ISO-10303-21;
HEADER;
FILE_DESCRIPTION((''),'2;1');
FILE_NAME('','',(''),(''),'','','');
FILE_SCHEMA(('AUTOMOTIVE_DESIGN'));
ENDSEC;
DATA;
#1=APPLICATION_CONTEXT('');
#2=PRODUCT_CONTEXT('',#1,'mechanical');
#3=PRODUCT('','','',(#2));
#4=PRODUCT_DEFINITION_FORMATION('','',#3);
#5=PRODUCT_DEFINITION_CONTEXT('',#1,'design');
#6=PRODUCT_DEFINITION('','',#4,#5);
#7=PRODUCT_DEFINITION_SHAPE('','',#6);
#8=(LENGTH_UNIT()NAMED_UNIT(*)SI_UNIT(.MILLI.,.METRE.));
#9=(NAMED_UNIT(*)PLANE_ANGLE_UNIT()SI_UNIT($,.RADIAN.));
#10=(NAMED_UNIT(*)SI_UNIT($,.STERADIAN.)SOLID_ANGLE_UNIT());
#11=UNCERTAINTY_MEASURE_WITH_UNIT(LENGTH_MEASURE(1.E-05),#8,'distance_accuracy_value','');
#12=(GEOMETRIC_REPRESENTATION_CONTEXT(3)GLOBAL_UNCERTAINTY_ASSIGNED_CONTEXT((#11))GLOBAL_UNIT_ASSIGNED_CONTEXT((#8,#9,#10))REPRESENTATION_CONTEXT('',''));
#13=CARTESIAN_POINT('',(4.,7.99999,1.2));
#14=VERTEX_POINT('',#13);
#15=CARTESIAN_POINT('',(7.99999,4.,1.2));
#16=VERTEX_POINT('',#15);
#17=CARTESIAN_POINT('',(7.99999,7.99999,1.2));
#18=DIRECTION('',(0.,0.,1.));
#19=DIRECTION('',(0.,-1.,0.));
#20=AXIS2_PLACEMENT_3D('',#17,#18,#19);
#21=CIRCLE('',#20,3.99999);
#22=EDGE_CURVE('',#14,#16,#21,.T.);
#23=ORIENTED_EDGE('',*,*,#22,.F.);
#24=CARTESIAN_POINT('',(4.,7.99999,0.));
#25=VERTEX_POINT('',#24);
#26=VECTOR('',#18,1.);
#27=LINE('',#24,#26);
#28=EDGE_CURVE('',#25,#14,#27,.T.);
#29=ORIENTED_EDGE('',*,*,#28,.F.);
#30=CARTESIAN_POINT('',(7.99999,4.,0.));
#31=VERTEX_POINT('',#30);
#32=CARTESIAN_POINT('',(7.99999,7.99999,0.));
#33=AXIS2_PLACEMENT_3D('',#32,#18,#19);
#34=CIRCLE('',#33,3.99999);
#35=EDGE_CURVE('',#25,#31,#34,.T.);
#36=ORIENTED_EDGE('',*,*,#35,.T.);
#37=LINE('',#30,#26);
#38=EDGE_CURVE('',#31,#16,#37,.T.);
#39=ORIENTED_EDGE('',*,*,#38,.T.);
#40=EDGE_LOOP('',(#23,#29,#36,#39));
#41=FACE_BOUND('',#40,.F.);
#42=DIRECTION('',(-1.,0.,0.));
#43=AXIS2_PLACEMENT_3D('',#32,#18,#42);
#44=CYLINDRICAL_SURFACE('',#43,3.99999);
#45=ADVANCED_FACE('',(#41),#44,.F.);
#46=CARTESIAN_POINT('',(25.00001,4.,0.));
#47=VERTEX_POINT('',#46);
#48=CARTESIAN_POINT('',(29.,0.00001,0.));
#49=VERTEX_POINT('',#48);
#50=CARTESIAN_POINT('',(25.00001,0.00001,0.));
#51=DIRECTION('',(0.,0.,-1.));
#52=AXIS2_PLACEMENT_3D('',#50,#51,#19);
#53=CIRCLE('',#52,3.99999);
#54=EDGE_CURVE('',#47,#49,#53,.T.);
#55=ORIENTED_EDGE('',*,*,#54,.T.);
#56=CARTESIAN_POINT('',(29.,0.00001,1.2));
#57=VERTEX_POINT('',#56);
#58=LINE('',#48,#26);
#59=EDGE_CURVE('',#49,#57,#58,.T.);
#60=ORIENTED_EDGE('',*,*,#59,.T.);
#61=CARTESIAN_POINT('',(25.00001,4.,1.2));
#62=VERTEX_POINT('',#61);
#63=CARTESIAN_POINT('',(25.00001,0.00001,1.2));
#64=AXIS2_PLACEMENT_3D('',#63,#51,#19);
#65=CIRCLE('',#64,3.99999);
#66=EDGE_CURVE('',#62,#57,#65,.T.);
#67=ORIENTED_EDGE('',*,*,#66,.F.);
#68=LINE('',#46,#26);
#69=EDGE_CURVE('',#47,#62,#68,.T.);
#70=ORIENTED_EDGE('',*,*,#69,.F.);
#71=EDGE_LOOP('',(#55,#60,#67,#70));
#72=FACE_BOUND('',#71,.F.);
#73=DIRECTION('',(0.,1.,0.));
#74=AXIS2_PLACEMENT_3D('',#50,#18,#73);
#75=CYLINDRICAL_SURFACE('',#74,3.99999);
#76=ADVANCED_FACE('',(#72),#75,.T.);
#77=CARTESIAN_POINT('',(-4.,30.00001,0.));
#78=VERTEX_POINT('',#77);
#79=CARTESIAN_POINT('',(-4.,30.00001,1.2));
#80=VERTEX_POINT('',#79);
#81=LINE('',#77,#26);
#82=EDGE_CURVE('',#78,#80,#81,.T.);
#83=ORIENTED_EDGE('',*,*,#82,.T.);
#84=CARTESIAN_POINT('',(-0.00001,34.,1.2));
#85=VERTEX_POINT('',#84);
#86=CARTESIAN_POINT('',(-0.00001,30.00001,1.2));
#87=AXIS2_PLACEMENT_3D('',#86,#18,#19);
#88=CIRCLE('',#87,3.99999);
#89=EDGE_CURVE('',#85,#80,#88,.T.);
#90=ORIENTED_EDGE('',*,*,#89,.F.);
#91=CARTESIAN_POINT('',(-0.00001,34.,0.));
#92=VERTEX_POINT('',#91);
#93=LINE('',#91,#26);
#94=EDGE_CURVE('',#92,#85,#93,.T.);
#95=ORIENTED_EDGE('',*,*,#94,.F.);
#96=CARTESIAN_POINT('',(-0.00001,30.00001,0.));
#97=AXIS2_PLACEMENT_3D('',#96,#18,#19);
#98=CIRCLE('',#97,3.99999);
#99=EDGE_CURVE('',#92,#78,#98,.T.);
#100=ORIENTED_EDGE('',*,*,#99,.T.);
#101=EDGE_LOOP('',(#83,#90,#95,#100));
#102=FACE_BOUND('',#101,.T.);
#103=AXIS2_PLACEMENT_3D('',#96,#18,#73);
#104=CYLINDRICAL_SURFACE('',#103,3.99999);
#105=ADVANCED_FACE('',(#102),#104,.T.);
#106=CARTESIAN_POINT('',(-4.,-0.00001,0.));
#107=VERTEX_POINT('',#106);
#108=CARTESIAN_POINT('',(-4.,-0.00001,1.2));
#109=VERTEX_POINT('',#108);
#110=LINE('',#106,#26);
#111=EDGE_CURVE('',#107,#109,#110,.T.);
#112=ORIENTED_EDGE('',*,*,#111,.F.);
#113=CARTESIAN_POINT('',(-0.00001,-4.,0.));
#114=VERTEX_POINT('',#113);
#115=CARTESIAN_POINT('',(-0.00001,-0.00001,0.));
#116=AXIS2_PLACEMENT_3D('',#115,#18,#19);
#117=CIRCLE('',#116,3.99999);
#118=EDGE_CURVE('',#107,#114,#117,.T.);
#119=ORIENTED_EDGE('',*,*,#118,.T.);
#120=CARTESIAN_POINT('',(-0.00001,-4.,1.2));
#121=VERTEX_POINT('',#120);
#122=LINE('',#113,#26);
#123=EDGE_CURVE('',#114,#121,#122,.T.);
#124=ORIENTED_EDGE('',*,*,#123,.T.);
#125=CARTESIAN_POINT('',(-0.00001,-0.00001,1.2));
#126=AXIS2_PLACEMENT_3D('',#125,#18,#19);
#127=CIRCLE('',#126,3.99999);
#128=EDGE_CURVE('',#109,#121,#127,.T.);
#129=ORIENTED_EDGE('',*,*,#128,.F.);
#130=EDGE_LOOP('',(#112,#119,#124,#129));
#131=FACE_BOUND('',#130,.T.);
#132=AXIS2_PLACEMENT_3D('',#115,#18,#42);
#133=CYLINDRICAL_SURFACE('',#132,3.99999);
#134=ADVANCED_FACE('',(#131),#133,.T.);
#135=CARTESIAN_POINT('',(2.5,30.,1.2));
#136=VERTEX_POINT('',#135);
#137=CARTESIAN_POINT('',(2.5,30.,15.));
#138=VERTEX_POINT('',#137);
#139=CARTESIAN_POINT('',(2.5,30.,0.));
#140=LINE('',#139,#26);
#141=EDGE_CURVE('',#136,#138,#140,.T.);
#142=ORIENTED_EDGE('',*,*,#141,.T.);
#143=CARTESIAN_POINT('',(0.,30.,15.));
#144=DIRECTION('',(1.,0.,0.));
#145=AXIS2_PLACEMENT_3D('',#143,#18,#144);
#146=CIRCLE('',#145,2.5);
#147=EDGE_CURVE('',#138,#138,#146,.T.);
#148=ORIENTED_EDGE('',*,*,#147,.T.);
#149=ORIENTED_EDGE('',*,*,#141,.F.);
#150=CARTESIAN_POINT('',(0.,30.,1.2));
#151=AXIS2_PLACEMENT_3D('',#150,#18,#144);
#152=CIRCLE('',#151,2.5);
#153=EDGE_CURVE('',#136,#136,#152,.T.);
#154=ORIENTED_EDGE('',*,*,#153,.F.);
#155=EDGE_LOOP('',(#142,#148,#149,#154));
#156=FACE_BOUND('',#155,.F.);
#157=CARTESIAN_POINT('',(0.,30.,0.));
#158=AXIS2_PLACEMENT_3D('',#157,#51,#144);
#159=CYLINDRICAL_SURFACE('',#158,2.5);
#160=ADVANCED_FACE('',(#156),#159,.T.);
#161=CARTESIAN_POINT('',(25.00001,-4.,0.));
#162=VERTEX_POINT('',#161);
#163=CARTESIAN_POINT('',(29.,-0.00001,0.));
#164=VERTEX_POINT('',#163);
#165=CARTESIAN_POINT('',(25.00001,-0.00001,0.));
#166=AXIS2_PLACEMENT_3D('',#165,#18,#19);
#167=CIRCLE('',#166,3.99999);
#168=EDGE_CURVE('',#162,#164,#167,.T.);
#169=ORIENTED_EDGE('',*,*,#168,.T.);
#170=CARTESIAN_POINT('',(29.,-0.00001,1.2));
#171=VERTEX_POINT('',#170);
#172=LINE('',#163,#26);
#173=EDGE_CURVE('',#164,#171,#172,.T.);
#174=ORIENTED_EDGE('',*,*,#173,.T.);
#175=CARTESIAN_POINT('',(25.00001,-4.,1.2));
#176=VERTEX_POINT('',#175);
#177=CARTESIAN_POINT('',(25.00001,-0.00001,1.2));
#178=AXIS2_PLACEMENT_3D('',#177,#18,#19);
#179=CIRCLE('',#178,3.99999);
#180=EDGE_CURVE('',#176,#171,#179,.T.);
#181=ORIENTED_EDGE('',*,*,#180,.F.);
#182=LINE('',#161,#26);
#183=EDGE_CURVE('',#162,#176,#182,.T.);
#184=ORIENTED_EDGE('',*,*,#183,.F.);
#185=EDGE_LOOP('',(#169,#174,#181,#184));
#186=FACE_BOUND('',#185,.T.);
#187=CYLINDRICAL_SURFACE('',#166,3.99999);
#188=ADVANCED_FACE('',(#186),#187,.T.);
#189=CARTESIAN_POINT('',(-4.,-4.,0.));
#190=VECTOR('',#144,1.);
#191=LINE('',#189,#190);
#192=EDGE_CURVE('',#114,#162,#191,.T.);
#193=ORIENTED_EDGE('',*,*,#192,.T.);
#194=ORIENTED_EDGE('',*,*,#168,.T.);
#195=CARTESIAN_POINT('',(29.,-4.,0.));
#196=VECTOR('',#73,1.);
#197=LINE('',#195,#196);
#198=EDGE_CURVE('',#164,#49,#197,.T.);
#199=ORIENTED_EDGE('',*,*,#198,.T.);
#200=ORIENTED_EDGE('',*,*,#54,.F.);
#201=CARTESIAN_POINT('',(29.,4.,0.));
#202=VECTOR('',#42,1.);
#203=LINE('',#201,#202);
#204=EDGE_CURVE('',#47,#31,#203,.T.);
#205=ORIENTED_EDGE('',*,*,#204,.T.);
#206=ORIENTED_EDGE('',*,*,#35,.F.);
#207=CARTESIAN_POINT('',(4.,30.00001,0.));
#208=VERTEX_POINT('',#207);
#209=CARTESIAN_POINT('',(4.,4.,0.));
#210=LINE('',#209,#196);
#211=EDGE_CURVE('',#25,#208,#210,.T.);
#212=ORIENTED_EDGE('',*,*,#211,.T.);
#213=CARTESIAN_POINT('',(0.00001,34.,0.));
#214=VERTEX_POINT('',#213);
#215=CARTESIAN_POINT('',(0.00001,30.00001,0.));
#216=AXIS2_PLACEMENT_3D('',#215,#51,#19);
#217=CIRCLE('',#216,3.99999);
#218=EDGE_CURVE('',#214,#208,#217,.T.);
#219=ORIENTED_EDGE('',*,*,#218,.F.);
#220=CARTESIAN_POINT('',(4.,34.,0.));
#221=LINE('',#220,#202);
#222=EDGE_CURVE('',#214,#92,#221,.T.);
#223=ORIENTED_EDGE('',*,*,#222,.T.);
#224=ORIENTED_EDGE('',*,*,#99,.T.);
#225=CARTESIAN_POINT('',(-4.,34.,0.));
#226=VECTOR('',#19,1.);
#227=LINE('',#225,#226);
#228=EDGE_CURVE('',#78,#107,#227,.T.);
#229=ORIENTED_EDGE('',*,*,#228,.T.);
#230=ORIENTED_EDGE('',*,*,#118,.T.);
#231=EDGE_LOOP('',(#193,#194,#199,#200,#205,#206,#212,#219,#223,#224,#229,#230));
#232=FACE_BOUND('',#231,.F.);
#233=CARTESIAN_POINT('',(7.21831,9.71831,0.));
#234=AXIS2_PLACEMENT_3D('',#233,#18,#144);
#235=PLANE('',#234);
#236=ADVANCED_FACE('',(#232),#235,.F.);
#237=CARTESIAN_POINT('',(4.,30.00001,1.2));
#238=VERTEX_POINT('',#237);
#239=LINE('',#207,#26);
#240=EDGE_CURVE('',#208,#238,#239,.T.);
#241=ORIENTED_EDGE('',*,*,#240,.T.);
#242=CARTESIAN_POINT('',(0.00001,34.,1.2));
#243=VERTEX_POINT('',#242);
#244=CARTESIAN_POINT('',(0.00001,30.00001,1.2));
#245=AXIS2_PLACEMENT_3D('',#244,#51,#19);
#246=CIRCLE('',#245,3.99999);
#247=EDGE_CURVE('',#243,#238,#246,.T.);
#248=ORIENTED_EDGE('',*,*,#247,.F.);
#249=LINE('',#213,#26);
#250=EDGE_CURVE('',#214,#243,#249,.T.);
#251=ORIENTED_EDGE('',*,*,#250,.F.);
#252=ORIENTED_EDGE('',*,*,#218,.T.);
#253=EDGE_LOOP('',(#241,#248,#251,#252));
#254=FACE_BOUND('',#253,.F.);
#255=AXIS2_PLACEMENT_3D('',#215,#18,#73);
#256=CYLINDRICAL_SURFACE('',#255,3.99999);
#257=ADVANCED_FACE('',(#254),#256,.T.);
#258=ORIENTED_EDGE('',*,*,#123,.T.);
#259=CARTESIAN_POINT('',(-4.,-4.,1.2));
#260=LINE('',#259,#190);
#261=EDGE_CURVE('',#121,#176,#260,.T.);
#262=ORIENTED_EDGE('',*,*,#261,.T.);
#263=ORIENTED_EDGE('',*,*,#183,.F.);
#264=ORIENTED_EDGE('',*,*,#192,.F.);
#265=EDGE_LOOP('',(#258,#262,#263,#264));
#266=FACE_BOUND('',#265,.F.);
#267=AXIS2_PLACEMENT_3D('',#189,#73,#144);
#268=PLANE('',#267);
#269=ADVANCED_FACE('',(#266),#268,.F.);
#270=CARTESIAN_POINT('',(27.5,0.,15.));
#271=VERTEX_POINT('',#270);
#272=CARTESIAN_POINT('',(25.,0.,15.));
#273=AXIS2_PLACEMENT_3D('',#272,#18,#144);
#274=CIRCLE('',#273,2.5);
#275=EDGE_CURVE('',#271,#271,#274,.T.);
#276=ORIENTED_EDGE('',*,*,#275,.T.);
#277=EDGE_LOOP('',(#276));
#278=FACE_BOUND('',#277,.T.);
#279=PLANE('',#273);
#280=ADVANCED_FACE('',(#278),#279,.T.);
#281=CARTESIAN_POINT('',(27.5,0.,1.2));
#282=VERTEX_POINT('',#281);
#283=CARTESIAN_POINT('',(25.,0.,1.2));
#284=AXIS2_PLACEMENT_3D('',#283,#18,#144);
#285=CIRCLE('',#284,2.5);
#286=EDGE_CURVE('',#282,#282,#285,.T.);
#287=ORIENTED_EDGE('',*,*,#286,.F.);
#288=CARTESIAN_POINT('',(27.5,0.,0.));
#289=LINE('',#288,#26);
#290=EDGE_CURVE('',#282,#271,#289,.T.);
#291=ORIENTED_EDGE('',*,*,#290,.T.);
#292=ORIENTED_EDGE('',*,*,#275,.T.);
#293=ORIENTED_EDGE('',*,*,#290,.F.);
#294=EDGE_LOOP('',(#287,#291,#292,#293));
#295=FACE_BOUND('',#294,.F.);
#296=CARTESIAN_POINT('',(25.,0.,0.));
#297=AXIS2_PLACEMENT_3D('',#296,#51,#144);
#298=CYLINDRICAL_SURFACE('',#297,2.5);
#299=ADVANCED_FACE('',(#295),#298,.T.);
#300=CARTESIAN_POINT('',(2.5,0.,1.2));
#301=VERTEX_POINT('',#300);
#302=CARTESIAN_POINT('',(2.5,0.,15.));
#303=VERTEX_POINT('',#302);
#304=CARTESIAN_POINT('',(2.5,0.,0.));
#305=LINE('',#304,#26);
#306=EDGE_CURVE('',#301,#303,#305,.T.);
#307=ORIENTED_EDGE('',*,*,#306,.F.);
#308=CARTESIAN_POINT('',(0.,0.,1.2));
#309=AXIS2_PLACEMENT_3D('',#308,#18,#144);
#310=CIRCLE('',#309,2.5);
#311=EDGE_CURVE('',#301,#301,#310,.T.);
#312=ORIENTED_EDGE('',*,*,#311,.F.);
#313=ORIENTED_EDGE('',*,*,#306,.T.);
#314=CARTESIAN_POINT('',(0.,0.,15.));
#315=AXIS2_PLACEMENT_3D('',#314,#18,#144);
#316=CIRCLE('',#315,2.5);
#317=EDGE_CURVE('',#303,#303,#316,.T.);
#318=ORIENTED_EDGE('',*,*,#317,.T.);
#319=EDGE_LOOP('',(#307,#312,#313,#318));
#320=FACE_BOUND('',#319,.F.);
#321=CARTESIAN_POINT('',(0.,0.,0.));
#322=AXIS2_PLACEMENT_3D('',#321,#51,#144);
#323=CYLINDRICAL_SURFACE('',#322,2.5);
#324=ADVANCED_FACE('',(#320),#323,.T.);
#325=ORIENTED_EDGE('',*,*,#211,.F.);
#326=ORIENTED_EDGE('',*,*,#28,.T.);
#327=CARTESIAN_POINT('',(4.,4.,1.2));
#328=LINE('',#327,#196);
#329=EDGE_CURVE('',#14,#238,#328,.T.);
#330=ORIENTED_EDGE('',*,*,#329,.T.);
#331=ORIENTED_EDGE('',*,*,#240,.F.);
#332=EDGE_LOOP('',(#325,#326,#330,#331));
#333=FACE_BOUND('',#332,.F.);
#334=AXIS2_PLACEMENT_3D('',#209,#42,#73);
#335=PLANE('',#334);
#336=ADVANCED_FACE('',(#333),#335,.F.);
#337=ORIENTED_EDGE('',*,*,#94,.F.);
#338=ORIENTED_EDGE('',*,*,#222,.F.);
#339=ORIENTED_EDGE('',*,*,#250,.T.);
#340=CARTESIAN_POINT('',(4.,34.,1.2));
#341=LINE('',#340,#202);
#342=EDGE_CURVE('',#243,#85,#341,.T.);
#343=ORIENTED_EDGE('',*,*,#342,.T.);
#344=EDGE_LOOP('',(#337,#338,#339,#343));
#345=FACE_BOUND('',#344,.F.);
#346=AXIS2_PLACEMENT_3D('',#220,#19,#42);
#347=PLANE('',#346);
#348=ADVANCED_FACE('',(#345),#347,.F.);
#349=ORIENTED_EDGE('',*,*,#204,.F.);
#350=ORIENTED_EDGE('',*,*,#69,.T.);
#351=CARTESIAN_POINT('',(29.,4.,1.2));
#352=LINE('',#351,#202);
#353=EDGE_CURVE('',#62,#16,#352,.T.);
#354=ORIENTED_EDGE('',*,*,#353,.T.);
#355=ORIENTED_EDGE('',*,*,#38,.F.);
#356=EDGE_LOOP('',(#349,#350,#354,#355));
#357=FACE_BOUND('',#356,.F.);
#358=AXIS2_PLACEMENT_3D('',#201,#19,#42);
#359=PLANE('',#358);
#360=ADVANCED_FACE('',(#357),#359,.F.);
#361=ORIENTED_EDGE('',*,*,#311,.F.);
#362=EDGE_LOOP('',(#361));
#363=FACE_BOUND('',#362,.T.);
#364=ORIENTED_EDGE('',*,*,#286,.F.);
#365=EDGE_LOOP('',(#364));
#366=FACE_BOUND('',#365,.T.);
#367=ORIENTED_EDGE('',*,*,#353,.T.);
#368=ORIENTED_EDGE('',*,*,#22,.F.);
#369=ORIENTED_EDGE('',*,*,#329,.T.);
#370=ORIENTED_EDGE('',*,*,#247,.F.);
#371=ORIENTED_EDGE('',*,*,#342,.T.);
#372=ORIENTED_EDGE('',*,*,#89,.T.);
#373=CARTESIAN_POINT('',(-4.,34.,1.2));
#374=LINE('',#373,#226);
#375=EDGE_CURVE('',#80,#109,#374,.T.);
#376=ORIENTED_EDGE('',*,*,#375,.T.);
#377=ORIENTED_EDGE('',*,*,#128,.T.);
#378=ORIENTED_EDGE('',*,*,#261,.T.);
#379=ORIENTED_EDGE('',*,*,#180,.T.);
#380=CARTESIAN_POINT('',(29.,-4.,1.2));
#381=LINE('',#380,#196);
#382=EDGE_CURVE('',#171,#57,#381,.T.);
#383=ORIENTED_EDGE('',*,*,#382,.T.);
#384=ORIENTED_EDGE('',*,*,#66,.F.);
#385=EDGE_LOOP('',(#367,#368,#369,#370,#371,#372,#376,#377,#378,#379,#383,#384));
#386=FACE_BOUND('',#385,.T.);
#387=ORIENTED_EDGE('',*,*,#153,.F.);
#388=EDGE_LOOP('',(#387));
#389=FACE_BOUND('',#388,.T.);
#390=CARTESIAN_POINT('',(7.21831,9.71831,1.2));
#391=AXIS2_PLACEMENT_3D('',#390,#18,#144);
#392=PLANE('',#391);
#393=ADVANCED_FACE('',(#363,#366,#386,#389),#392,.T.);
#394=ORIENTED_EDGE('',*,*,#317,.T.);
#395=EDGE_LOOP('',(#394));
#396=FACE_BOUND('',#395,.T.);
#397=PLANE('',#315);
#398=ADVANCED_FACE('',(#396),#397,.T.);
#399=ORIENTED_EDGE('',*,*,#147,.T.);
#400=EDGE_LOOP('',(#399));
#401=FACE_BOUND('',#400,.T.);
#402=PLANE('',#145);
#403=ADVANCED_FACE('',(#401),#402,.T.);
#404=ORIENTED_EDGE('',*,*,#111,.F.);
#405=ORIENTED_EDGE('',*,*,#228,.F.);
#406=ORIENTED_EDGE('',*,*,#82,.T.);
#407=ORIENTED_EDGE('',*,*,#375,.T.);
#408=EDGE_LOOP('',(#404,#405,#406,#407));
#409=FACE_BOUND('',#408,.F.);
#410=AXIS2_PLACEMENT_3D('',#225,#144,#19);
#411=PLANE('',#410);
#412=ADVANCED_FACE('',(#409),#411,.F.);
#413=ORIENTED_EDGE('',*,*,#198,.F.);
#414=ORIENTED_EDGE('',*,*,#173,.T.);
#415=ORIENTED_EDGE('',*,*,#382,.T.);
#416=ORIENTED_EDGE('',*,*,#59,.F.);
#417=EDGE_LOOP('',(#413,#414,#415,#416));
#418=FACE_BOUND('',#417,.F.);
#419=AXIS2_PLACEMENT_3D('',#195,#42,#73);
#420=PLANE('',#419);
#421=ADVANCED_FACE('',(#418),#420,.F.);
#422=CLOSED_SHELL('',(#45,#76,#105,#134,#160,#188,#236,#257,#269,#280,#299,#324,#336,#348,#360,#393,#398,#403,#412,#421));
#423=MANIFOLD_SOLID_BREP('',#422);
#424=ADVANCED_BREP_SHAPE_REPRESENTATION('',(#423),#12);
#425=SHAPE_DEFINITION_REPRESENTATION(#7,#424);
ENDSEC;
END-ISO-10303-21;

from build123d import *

# Parameters (mm, degrees)
F0_R     = 2.5
F1_DEPTH = 1.2
F2_DEPTH = 15
F3_R     = 3.99999


# Not quite as in the source:
# - a fillet or chamfer is up to 0.001 mm smaller than in the source, because OpenCascade refuses the exact size


with BuildPart() as f1:
    # F0 (on Top) → F1 (new body)
    with BuildSketch(Plane.XY):
        Polygon((4, 34), (-4, 34), (-4, -4), (29, -4), (29, 4), (4, 4), align=None)
        Circle(F0_R, mode=Mode.SUBTRACT)
        with Locations((25, 0)):
            Circle(F0_R, mode=Mode.SUBTRACT)
        with Locations((0, 30)):
            Circle(F0_R, mode=Mode.SUBTRACT)
    extrude(amount=F1_DEPTH)

    # F0 (on Top) → F2 (join)
    with BuildSketch(Plane.XY):
        Circle(F0_R)
        with Locations((25, 0)):
            Circle(F0_R)
        with Locations((0, 30)):
            Circle(F0_R)
    extrude(amount=F2_DEPTH)

    # F3 (radius 4 in the source; OpenCascade refuses exactly that, so slightly less here)
    f3_edges = [f1.edges().sort_by_distance(p)[0] for p in [
        (4, 4, 0.6),
        (29, 4, 0.6),
        (29, -4, 0.6),
        (-4, -4, 0.6),
        (-4, 34, 0.6),
        (4, 34, 0.6),
    ]]
    fillet(f3_edges, radius=F3_R)


solid = f1.part
